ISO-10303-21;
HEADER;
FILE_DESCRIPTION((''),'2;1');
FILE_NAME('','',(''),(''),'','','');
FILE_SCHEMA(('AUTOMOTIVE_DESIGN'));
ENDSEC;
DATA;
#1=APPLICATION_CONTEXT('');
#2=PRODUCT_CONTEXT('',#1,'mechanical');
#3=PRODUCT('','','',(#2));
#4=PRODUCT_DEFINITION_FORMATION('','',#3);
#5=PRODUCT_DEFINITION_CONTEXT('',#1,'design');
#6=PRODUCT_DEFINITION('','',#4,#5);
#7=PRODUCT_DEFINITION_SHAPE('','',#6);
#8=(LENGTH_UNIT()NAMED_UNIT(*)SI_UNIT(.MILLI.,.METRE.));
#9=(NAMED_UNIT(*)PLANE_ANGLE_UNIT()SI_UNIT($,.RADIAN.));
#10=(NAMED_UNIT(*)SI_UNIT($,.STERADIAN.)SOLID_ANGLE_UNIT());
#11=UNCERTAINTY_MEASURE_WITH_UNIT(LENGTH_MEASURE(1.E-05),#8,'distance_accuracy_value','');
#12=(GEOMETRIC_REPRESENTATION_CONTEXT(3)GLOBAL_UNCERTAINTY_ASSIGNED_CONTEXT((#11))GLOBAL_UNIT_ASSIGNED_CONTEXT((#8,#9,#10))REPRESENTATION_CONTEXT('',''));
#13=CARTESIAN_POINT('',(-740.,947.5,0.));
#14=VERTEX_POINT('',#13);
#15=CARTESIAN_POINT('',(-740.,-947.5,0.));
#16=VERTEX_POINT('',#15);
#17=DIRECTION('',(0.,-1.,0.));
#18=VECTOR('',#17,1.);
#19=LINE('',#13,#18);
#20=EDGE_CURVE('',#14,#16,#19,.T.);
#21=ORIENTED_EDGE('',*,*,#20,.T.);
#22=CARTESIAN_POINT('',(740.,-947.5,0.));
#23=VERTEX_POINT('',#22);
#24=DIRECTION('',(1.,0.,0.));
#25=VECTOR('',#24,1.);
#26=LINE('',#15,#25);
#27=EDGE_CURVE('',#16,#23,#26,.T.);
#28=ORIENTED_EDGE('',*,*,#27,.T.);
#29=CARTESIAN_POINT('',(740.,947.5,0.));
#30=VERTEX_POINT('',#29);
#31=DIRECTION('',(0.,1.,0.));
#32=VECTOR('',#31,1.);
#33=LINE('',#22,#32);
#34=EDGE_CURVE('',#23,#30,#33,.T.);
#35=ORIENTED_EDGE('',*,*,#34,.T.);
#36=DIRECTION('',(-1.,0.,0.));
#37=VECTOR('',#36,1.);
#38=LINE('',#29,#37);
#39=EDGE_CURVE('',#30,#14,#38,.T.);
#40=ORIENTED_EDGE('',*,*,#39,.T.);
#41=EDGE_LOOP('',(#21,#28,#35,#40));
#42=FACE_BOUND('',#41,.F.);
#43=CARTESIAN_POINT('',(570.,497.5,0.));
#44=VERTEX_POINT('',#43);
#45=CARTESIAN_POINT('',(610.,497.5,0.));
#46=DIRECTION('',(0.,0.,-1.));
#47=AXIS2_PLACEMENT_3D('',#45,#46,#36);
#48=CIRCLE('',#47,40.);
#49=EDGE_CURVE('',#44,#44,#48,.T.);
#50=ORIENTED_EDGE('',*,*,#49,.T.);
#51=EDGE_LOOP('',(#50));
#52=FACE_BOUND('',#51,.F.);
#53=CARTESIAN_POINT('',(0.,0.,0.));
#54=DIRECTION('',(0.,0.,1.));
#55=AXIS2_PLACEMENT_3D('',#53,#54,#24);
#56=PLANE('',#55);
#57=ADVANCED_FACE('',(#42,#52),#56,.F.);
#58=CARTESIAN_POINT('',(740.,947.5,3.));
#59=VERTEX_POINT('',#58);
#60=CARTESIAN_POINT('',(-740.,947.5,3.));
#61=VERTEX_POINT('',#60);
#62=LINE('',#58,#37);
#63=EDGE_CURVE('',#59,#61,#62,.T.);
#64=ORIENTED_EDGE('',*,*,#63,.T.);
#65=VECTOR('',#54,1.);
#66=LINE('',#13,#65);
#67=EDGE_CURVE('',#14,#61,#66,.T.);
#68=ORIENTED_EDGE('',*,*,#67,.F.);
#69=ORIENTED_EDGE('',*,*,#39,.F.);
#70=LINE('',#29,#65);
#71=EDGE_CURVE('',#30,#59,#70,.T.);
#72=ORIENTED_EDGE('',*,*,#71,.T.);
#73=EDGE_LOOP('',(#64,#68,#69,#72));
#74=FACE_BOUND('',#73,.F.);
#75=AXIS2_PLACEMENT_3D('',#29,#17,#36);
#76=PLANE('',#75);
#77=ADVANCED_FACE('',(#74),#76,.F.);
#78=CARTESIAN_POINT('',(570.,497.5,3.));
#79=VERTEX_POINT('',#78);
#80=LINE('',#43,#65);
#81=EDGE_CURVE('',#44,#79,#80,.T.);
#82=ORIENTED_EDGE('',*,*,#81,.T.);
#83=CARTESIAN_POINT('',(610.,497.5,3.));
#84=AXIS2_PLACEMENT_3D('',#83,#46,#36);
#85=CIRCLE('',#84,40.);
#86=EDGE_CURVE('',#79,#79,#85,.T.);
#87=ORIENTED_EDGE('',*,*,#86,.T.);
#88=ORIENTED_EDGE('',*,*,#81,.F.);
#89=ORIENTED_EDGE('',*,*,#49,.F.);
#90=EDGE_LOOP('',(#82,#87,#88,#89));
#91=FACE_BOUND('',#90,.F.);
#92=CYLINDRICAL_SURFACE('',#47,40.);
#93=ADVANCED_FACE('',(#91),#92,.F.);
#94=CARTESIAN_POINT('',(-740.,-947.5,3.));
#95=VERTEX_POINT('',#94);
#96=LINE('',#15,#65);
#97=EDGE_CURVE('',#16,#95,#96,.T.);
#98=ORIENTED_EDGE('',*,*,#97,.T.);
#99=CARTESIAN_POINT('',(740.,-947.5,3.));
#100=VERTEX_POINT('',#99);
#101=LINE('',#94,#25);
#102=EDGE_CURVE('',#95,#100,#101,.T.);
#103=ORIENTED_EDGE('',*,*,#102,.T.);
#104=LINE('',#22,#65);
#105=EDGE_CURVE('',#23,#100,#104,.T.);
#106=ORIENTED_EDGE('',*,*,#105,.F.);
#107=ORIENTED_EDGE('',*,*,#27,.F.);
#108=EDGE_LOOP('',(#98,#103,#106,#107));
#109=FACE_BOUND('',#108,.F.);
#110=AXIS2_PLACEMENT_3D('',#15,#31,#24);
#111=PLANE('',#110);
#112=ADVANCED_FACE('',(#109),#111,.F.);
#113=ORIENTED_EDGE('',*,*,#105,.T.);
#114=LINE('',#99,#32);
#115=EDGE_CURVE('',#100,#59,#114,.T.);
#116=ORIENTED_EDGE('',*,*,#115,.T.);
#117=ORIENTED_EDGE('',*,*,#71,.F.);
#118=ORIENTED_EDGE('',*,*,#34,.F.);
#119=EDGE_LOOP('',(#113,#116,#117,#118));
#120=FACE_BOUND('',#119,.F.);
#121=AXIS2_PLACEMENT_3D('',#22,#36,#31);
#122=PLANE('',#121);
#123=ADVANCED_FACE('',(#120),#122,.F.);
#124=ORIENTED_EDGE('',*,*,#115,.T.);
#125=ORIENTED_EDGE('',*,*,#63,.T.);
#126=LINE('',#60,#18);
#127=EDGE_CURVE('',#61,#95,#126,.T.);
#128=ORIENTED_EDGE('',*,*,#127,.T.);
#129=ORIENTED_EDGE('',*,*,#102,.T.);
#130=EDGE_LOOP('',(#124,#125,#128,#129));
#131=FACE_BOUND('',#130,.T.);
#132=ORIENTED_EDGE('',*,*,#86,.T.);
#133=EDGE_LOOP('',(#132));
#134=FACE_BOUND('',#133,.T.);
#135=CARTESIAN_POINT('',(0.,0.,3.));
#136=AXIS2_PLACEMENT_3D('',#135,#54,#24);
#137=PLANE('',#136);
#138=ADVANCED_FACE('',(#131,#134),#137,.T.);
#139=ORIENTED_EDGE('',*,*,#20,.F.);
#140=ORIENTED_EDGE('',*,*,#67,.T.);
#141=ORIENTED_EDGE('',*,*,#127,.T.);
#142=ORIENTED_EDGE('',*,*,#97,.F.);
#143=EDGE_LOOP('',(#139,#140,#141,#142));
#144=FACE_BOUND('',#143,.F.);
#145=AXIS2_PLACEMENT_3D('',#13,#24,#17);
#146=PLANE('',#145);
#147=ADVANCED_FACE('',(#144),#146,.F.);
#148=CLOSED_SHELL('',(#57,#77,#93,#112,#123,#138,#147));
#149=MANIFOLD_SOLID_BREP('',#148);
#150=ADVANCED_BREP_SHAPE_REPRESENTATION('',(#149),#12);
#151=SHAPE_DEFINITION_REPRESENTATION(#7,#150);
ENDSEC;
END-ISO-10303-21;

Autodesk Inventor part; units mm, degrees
ref_plane "YZ Plane" through (0, 0, 0) normal (1, 0, 0) x (0, 1, 0)
ref_plane "XZ Plane" through (0, 0, 0) normal (0, 1, 0) x (-1, 0, 0)
ref_plane "XY Plane" through (0, 0, 0) normal (0, 0, 1) x (1, 0, 0)
sketch "Sketch6" plane through (0, 0, 0) normal (0, 0, 1) x (1, 0, 0)
  line L0 (740, 947.5) -> (-740, 947.5)
  line L1 (-740, 947.5) -> (-740, -947.5)
  line L2 (-740, -947.5) -> (740, -947.5)
  line L3 (740, -947.5) -> (740, 947.5)
  line L4 (740, 947.5) -> (-740, -947.5) construction
  line L5 (-740, 947.5) -> (740, -947.5) construction
  point P0 (0, 0)
  dimension "d40" = 1480
  dimension "d41" = 1895
extrude "Plate5" add sketch "Sketch6" along normal blind 3
sketch "Sketch7" plane through (0, 0, 0) normal (0, 0, -1) x (-1, 0, 0)
  line L0 (-715, 922.5) -> (-515, 922.5) construction
  line L1 (-515, 922.5) -> (-515, 907.5) construction
  line L2 (-515, 907.5) -> (-715, 907.5) construction
  line L3 (-715, 907.5) -> (-715, 922.5) construction
  line L4 (-740, 947.5) -> (740, 947.5) projected
  line L5 (-740, -947.5) -> (-740, 947.5) projected
  point P0 (0, 0)
  dimension "d43" = 200
  dimension "d44" = 15
  dimension "d45" = 25
  dimension "d46" = 25
mark "Mark1"
sketch "Sketch8" plane through (740, 947.5, 0) normal (0, 0, -1) x (-1, 0, 0)
  circle A0 centre (130, -450) radius 40
  line L0 (1480, 0) -> (1480, -1895) projected
  line L1 (0, 0) -> (1480, 0) projected
  point P0 (740, -947.5)
  dimension "d47" = 80
  dimension "d48" = 1350
  dimension "d49" = 450
extrude "Extrusion3" cut sketch "Sketch8" against normal up to surface (3 mm away)
equation "\"d42\" = Thickness"
equation "\"BendReliefWidth\" = Thickness"
equation "\"BendReliefDepth\" = 0.5 * Thickness"
equation "\"CornerReliefSize\" = 4 * Thickness"
equation "\"MinimumRemnant\" = 2 * Thickness"
equation "\"TransitionRadius\" = BendRadius"
equation "\"JacobiRadiusSize\" = BendRadius"
equation "\"GapSize\" = Thickness"
equation "\"Thickness\" = 3"
equation "\"BendRadius\" = 5"
properties part number "BSH 051 back 1" material "09g2s"
